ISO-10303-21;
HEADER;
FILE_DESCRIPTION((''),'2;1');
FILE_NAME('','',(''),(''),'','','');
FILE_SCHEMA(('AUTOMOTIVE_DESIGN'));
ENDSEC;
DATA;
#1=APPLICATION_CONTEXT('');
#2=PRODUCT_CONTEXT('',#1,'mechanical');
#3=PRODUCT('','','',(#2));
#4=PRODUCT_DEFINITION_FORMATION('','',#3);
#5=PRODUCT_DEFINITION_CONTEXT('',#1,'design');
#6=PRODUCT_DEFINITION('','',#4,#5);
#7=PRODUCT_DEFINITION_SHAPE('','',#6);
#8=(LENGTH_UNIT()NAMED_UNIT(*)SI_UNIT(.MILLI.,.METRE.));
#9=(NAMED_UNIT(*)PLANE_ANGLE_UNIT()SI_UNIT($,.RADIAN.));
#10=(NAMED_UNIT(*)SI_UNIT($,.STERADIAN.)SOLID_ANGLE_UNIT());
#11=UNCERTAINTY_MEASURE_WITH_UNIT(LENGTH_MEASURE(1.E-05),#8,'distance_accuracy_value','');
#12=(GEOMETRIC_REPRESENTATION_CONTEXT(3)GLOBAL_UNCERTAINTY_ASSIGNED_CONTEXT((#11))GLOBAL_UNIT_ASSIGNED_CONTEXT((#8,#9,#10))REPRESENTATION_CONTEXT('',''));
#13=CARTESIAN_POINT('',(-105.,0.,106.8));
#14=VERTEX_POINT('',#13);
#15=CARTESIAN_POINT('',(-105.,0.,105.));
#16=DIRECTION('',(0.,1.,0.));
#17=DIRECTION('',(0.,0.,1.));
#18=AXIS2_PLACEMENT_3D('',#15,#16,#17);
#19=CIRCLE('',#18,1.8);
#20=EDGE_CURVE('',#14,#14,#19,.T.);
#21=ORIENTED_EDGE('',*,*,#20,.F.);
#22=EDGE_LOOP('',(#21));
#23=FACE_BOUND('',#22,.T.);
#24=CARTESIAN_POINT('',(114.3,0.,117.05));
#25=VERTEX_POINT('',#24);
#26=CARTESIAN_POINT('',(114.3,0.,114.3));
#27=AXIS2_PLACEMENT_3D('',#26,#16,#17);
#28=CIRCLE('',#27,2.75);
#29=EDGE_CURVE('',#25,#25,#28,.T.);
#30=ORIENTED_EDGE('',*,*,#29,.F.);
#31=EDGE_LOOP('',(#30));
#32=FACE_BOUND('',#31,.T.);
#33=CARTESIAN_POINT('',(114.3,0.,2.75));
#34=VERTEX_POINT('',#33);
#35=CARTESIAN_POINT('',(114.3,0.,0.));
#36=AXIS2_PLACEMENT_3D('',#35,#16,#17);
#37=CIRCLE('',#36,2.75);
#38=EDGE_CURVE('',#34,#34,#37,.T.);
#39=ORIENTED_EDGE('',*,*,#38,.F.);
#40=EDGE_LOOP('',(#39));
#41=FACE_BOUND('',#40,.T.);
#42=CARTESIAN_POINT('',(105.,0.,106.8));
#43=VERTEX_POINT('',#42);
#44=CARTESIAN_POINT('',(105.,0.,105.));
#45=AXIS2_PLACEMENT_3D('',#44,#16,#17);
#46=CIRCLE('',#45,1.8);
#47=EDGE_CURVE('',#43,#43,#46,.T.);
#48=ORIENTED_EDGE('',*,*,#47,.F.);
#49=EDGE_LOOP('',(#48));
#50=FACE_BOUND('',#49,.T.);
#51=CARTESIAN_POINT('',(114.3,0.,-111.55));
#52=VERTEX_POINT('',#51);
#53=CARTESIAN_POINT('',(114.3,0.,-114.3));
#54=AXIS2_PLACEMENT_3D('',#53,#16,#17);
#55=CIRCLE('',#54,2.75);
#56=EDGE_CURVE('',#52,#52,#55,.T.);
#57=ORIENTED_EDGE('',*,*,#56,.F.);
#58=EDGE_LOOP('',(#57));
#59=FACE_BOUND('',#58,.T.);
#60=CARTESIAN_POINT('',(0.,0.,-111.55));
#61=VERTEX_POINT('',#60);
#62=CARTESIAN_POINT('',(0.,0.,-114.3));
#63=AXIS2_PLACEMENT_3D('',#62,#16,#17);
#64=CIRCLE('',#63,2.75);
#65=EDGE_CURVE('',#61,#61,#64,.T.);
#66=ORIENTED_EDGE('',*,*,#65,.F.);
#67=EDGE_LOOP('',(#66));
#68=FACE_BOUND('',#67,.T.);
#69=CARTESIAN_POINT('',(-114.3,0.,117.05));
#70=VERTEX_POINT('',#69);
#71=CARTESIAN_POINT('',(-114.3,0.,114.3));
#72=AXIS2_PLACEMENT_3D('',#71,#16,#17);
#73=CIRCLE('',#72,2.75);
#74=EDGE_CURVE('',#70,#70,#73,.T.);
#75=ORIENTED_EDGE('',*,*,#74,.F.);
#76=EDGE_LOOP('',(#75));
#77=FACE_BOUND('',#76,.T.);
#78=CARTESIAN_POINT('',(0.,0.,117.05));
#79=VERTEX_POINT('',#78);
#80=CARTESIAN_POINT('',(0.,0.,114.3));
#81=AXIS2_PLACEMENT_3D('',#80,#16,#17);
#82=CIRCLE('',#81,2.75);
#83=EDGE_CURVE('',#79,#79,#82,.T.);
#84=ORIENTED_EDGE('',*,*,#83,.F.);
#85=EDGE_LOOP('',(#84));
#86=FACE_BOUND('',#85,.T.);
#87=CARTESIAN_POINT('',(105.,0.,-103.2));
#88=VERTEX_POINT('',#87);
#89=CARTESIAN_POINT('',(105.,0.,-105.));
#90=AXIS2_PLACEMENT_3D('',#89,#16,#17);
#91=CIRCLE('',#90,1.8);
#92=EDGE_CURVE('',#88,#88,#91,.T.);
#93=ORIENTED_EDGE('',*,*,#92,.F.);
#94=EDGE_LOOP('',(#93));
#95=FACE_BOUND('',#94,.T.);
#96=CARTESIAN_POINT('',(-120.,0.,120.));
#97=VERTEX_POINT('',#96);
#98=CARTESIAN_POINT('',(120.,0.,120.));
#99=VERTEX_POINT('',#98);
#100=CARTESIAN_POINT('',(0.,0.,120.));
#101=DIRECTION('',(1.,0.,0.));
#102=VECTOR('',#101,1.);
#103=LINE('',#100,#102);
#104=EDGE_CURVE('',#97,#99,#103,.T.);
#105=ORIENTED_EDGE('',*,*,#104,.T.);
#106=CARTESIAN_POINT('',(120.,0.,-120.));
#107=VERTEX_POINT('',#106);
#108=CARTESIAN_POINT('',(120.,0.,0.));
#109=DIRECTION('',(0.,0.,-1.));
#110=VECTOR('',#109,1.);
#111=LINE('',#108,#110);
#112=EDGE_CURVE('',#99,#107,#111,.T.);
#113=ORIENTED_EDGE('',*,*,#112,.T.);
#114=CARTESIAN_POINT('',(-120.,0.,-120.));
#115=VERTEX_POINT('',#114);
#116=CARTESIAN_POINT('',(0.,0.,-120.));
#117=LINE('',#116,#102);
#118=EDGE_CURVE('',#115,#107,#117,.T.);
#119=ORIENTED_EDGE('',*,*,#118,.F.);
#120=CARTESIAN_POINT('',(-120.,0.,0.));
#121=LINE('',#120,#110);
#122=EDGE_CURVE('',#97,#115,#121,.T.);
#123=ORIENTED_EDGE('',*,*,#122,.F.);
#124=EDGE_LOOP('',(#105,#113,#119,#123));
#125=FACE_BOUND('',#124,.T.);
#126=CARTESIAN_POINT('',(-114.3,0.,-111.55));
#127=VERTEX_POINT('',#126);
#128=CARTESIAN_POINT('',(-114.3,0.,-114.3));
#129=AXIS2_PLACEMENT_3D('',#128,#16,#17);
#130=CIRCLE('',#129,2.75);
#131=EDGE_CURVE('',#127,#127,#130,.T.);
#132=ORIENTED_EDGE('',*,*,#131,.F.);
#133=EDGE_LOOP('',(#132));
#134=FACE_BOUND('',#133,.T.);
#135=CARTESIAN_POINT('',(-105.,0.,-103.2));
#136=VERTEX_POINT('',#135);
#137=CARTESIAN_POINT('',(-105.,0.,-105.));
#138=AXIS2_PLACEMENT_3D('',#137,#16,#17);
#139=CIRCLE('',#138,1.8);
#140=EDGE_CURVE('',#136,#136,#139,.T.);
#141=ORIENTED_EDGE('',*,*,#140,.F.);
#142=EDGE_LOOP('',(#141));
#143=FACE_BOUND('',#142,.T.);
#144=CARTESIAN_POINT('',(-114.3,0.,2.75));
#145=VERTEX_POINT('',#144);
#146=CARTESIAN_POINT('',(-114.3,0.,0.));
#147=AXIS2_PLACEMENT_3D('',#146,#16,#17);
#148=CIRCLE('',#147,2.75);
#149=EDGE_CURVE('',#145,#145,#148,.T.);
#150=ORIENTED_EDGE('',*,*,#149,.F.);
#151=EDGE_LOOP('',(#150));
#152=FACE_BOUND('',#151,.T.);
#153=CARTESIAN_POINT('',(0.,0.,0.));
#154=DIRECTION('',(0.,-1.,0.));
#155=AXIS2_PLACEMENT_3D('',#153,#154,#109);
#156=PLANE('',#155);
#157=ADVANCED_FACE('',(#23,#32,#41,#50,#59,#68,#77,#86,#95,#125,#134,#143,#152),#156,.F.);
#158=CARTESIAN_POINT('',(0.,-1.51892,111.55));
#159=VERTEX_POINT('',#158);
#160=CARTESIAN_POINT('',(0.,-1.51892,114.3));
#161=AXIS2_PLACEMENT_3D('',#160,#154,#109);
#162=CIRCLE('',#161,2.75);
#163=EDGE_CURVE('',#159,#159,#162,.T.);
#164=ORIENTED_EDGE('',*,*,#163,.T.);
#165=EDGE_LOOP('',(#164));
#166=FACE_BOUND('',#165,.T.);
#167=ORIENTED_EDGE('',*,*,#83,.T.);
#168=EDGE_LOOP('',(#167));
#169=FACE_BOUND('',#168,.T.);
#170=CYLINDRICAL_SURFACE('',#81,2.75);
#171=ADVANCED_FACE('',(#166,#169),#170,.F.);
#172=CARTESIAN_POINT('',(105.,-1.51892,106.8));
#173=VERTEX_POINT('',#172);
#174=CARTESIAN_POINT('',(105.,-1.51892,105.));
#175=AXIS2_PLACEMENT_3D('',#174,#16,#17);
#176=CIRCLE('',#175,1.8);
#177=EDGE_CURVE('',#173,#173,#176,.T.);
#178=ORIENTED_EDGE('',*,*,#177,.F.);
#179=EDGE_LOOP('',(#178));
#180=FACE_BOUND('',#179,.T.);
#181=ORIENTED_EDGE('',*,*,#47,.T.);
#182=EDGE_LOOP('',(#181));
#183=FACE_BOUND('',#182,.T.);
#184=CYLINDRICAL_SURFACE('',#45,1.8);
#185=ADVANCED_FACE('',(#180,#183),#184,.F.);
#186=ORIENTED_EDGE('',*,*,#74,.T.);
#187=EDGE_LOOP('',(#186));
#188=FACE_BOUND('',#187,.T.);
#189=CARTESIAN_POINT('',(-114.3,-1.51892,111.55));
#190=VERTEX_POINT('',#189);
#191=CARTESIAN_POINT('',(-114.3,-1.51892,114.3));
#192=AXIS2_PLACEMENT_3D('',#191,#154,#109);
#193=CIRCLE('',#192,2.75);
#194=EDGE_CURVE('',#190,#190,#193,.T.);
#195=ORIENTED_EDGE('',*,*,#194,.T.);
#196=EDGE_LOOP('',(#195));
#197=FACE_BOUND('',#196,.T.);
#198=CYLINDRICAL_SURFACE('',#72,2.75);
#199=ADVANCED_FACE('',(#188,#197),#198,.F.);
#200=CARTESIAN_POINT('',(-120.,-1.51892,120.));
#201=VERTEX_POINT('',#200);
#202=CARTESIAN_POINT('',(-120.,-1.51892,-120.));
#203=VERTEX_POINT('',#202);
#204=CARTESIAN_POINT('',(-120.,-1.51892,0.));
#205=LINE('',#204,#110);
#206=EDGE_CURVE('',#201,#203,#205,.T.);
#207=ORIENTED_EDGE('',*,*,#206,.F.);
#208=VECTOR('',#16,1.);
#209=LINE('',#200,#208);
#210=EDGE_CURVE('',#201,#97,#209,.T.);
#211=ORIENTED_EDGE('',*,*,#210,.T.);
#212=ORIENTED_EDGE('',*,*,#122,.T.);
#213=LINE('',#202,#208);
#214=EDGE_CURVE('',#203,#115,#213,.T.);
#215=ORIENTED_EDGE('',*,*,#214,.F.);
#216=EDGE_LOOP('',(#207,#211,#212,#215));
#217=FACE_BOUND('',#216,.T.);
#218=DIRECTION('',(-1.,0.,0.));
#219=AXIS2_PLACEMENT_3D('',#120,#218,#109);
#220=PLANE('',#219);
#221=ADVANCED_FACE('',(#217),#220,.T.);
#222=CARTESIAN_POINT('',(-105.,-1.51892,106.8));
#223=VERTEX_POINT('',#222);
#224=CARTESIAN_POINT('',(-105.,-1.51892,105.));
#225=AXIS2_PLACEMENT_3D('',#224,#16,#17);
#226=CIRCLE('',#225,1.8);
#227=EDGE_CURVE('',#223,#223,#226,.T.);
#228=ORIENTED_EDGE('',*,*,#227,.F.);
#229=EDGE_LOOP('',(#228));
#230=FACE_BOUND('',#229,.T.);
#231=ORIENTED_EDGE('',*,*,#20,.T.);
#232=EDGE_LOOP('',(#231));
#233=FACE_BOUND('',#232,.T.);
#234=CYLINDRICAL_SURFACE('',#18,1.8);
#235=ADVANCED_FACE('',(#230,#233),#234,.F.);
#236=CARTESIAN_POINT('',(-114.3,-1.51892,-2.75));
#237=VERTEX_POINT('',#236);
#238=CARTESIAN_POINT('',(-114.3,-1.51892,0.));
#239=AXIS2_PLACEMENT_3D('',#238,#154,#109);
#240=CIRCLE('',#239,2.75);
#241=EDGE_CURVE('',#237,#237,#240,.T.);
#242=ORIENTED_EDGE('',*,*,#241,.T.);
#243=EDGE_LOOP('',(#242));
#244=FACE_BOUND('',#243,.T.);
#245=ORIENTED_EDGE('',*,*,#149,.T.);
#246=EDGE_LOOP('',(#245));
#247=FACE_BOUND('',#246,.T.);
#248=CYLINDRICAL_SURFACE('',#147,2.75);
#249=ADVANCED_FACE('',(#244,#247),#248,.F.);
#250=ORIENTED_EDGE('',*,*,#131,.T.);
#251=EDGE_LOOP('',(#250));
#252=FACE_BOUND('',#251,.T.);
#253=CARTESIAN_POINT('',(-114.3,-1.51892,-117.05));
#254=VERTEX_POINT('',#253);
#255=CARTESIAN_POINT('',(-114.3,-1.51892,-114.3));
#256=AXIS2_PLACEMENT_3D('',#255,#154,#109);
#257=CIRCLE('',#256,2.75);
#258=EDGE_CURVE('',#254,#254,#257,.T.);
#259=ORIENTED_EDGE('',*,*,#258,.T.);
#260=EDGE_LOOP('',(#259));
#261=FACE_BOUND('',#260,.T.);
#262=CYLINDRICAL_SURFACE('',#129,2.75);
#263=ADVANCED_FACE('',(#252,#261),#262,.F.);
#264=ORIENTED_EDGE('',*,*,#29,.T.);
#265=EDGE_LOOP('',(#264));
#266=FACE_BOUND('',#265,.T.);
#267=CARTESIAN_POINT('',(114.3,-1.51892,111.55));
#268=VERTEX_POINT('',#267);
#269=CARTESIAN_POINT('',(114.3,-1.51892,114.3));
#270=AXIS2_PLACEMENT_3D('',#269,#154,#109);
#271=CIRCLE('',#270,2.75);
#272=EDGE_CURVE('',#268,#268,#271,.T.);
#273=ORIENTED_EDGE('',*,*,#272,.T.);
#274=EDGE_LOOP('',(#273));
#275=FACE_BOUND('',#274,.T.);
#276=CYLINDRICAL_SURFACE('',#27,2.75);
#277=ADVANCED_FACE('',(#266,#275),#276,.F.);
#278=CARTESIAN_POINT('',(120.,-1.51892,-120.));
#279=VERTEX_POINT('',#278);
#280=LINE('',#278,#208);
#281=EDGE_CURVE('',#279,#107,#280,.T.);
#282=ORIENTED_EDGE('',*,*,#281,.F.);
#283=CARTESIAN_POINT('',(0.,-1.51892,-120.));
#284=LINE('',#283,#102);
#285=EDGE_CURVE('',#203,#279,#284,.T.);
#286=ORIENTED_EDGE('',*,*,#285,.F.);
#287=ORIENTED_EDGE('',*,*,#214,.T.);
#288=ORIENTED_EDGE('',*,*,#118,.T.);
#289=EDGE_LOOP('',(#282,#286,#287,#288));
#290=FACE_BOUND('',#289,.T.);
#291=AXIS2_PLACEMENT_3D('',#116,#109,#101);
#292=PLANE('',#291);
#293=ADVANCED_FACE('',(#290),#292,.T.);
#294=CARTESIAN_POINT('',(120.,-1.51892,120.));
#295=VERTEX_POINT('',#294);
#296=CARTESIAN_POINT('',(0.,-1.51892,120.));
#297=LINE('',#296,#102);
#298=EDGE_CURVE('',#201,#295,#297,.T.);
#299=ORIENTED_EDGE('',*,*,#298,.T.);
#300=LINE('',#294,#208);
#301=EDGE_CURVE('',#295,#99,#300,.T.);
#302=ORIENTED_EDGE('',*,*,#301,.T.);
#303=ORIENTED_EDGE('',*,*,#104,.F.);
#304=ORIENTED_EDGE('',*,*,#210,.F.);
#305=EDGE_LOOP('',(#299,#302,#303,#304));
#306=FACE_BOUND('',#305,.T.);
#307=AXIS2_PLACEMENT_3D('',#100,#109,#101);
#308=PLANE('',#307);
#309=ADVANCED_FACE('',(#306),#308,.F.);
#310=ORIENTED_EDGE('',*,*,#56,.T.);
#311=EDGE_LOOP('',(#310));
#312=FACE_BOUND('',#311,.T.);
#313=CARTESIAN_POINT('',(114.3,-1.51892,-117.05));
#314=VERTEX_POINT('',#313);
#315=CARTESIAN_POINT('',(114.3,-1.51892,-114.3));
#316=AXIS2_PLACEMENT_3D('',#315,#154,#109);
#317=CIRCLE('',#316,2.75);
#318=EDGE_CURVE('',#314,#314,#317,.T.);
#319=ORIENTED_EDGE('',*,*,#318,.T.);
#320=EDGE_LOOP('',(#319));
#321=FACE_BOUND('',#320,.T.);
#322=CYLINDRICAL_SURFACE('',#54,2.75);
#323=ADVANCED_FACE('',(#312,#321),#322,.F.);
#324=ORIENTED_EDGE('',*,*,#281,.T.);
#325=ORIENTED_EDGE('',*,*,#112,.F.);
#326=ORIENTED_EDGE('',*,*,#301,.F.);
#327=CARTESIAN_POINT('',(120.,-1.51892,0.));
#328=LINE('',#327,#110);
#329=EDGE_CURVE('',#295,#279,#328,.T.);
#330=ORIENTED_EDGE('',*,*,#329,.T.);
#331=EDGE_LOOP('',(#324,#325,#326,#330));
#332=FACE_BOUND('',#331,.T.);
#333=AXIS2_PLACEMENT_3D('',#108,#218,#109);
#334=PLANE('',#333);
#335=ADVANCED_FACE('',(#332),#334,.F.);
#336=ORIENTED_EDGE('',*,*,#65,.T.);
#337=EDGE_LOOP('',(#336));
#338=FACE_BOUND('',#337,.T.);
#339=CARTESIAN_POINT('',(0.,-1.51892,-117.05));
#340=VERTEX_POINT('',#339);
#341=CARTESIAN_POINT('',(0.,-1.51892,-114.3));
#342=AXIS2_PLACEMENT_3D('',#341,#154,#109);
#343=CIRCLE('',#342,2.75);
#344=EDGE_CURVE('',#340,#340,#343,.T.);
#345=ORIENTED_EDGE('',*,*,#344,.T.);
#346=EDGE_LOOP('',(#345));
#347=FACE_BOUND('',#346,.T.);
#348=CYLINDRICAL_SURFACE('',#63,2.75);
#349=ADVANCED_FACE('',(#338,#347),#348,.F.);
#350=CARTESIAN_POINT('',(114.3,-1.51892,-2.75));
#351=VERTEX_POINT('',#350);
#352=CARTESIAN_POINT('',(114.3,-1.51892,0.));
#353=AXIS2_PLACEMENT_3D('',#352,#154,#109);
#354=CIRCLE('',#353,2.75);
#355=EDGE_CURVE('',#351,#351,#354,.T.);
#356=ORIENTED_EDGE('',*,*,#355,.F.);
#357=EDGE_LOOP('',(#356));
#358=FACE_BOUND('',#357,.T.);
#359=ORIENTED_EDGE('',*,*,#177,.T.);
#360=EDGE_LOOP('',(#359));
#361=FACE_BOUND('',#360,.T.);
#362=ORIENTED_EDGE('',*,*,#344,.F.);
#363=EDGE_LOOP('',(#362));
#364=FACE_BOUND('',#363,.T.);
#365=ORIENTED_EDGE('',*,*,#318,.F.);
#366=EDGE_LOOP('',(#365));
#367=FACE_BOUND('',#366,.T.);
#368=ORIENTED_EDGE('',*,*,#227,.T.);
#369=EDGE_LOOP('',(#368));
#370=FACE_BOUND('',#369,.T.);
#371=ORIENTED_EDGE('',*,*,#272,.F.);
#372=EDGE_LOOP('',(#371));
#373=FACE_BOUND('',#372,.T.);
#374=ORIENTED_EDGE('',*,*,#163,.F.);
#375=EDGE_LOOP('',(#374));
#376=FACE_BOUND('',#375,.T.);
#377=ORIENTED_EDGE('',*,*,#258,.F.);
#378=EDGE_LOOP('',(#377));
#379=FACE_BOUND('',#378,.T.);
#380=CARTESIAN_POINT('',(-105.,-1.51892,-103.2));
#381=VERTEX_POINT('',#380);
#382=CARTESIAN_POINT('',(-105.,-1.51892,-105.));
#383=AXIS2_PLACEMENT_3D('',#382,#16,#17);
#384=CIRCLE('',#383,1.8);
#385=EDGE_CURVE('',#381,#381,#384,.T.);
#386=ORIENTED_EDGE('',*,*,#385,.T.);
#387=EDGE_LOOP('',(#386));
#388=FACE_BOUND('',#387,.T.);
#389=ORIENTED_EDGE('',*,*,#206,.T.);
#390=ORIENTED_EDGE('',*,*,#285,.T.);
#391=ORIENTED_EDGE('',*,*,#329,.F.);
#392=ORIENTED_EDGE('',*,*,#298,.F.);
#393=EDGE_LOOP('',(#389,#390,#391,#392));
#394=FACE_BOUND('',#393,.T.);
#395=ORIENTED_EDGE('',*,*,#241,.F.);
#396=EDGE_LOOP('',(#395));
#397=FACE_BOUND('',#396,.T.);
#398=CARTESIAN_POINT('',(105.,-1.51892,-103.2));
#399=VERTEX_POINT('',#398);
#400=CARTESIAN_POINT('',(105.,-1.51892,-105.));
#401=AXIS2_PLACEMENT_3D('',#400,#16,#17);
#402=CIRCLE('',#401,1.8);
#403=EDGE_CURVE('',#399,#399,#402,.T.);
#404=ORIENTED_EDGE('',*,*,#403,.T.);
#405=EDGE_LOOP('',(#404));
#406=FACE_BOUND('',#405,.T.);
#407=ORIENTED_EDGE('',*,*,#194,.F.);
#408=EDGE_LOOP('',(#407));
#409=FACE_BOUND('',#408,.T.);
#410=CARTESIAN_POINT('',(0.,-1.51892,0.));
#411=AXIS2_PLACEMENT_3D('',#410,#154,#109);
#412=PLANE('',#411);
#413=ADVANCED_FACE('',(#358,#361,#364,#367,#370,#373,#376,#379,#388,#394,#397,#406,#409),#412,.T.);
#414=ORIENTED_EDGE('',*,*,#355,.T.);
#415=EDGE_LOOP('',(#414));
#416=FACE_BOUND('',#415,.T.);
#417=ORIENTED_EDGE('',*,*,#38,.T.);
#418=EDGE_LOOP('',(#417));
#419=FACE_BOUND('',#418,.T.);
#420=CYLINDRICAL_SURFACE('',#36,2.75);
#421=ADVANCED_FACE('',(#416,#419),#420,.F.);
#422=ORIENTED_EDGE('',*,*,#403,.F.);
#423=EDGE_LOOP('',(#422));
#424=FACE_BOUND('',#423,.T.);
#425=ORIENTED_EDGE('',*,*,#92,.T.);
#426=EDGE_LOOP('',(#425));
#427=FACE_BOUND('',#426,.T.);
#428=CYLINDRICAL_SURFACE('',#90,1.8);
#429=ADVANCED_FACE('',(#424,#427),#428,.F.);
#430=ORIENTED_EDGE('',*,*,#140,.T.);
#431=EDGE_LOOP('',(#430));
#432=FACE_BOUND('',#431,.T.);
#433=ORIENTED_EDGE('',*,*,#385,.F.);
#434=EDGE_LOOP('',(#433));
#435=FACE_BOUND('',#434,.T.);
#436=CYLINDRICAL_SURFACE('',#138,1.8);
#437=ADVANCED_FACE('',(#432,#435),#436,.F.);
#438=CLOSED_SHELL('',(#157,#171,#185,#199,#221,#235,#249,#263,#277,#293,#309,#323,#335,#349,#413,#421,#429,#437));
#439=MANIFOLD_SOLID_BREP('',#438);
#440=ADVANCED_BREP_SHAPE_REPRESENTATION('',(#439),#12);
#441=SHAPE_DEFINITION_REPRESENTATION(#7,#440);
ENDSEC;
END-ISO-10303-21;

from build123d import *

# Parameters (mm, degrees)
SKETCH1_W            = 350
SKETCH1_H            = 347
BASE_FLANGE1_DEPTH   = 1.51892
M3_CLEARANCE_HOLE1_D = 3.6
M4_CLEARANCE_HOLE1_D = 4.8
SKETCH13_R           = 8.5
SKETCH13_R_2         = 1.375
CUT_EXTRUDE1_DEPTH   = 1.51892
SKETCH41_W           = 347
SKETCH41_H           = 1.51892
BOSS_EXTRUDE4_DEPTH  = 1.905
SKETCH42_W           = 347
SKETCH42_H           = 1.51892
BOSS_EXTRUDE5_DEPTH  = 1.905
CUT_EXTRUDE2_DEPTH   = 1.51892
BOSS_EXTRUDE6_DEPTH  = 1.51892
CLEARANCE_HOLE2_D    = 3.4
FILLET2_R            = 5
SKETCH50_OUTSIDE_W   = 455.91
SKETCH50_OUTSIDE_H   = 456.1
SKETCH50_OUTSIDE_W_2 = 240
SKETCH50_OUTSIDE_H_2 = 240
CUT_EXTRUDE3_DEPTH   = 1.51892
M5_CLEARANCE_HOLE1_D = 5.5


# Sheet-metal steps are written as plain solids
with BuildPart() as part:
    # Sketch1 → Base-Flange1 (new body)
    with BuildSketch(Plane(origin=(0, 0, 0), x_dir=(1, 0, 0), z_dir=(0, 1, 0))):
        with Locations((0, 13.5)):
            Rectangle(SKETCH1_W, SKETCH1_H)
    extrude(amount=-BASE_FLANGE1_DEPTH)

    # M3 Clearance Hole1 (through all)
    with Locations(Plane(origin=(0, 0, 0), x_dir=(1, 0, 0), z_dir=(0, 1, 0))):
        with Locations((-105, 105), (105, 105), (105, -105), (-105, -105)):
            Hole(M3_CLEARANCE_HOLE1_D / 2)

    # M4 Clearance Hole1 (through all)
    with Locations(Plane(origin=(0, -1.51892, 0), x_dir=(-1, 0, 0), z_dir=(0, -1, 0))):
        with Locations((167.5, 146.5), (167.5, 169), (-167.5, 146.5), (-167.5, 169), (-167.5, -149), (-167.5, -126.5), (167.5, -149), (167.5, -126.5)):
            Hole(M4_CLEARANCE_HOLE1_D / 2)

    # Sketch13 → Cut-Extrude1 (cut)
    with BuildSketch(Plane(origin=(0, 0, 0), x_dir=(1, 0, 0), z_dir=(0, 1, 0))):
        with Locations(Location((0, 170, 0), (0, 0, 270))):
            Circle(SKETCH13_R)
        with Locations(Location((-11.825, 170, 0), (0, 0, 270))):
            Circle(SKETCH13_R_2)
        with Locations(Location((11.825, 170, 0), (0, 0, 270))):
            Circle(SKETCH13_R_2)
    extrude(amount=-CUT_EXTRUDE1_DEPTH, mode=Mode.SUBTRACT)

    # Sketch41 → Boss-Extrude4 (add)
    with BuildSketch(Plane(origin=(175, 0, 0), x_dir=(0, 0, -1), z_dir=(1, 0, 0))):
        with Locations((13.5, -0.75946)):
            Rectangle(SKETCH41_W, SKETCH41_H)
    extrude(amount=BOSS_EXTRUDE4_DEPTH)

    # Sketch42 → Boss-Extrude5 (add)
    with BuildSketch(Plane.ZY.offset(175)):
        with Locations((-13.5, -0.75946)):
            Rectangle(SKETCH42_W, SKETCH42_H)
    extrude(amount=BOSS_EXTRUDE5_DEPTH)

    # Sketch43 → Cut-Extrude2 (cut)
    with BuildSketch(Plane(origin=(0, 0, 0), x_dir=(1, 0, 0), z_dir=(0, 1, 0))):
        Polygon((-176.905, -120), (-120, -63.095), (-120, 80.095), (-176.905, 137), align=None)
        Polygon((-156.905, 177), (-99.905, 120), (-42.952595893, 120), (-25, 187), (-176.905, 187), (-176.905, 177), align=None)
        Polygon((25, 187), (42.952595893, 120), (99.905, 120), (156.905, 177), (176.905, 177), (176.905, 187), align=None)
        Polygon((120, 80.095), (120, -63.095), (176.905, -120), (176.905, 137), align=None)
        Polygon((116.905, -120), (-116.905, -120), (-156.905, -160), (156.905, -160), align=None)
    extrude(amount=-CUT_EXTRUDE2_DEPTH, mode=Mode.SUBTRACT)

    # Sketch45 → Boss-Extrude6 (add)
    with BuildSketch(Plane(origin=(0, 0, 0), x_dir=(1, 0, 0), z_dir=(0, 1, 0))):
        Polygon((-25, 187), (-23.124355653, 194), (23.124355653, 194), (25, 187), align=None)
    extrude(amount=-BOSS_EXTRUDE6_DEPTH)

    # Clearance Hole2 (through all)
    with Locations(Plane(origin=(0, 0, 0), x_dir=(1, 0, 0), z_dir=(0, 1, 0))):
        with Locations((-9.525, 188), (9.525, 188)):
            Hole(CLEARANCE_HOLE2_D / 2)

    # Fillet2
    fillet2_edges = [part.edges().sort_by_distance(p)[0] for p in [
        (176.905, -0.75946, 160),
        (-176.905, -0.75946, 160),
        (176.905, -0.75946, -177),
        (42.952595893, -0.75946, -120),
        (99.905, -0.75946, -120),
        (156.905, -0.75946, -177),
        (176.905, -0.75946, 120),
        (176.905, -0.75946, -137),
        (120, -0.75946, -80.095),
        (120, -0.75946, 63.095),
        (-176.905, -0.75946, -137),
        (-176.905, -0.75946, 120),
        (-120, -0.75946, 63.095),
        (-120, -0.75946, -80.095),
        (-176.905, -0.75946, -177),
        (-156.905, -0.75946, -177),
        (-99.905, -0.75946, -120),
        (-42.952595893, -0.75946, -120),
        (-156.905, -0.75946, 160),
        (156.905, -0.75946, 160),
        (116.905, -0.75946, 120),
        (-116.905, -0.75946, 120),
        (-23.124355653, -0.75946, -194),
        (23.124355653, -0.75946, -194),
    ]]
    fillet(fillet2_edges, radius=FILLET2_R)

    # Sketch50 outside → Cut-Extrude3 (cut)
    with BuildSketch(Plane(origin=(0, 0, 0), x_dir=(1, 0, 0), z_dir=(0, 1, 0))):
        with Locations((0, 17)):
            Rectangle(SKETCH50_OUTSIDE_W, SKETCH50_OUTSIDE_H)
        Rectangle(SKETCH50_OUTSIDE_W_2, SKETCH50_OUTSIDE_H_2, mode=Mode.SUBTRACT)
    extrude(amount=-CUT_EXTRUDE3_DEPTH, mode=Mode.SUBTRACT)

    # M5 Clearance Hole1 (through all)
    with Locations(Plane(origin=(0, 0, 0), x_dir=(1, 0, 0), z_dir=(0, 1, 0))):
        with Locations((-114.3, 114.3), (114.3, 114.3), (114.3, -114.3), (-114.3, -114.3), (-114.3, 0), (0, 114.3), (114.3, 0), (0, -114.3)):
            Hole(M5_CLEARANCE_HOLE1_D / 2)


solid = part.part
